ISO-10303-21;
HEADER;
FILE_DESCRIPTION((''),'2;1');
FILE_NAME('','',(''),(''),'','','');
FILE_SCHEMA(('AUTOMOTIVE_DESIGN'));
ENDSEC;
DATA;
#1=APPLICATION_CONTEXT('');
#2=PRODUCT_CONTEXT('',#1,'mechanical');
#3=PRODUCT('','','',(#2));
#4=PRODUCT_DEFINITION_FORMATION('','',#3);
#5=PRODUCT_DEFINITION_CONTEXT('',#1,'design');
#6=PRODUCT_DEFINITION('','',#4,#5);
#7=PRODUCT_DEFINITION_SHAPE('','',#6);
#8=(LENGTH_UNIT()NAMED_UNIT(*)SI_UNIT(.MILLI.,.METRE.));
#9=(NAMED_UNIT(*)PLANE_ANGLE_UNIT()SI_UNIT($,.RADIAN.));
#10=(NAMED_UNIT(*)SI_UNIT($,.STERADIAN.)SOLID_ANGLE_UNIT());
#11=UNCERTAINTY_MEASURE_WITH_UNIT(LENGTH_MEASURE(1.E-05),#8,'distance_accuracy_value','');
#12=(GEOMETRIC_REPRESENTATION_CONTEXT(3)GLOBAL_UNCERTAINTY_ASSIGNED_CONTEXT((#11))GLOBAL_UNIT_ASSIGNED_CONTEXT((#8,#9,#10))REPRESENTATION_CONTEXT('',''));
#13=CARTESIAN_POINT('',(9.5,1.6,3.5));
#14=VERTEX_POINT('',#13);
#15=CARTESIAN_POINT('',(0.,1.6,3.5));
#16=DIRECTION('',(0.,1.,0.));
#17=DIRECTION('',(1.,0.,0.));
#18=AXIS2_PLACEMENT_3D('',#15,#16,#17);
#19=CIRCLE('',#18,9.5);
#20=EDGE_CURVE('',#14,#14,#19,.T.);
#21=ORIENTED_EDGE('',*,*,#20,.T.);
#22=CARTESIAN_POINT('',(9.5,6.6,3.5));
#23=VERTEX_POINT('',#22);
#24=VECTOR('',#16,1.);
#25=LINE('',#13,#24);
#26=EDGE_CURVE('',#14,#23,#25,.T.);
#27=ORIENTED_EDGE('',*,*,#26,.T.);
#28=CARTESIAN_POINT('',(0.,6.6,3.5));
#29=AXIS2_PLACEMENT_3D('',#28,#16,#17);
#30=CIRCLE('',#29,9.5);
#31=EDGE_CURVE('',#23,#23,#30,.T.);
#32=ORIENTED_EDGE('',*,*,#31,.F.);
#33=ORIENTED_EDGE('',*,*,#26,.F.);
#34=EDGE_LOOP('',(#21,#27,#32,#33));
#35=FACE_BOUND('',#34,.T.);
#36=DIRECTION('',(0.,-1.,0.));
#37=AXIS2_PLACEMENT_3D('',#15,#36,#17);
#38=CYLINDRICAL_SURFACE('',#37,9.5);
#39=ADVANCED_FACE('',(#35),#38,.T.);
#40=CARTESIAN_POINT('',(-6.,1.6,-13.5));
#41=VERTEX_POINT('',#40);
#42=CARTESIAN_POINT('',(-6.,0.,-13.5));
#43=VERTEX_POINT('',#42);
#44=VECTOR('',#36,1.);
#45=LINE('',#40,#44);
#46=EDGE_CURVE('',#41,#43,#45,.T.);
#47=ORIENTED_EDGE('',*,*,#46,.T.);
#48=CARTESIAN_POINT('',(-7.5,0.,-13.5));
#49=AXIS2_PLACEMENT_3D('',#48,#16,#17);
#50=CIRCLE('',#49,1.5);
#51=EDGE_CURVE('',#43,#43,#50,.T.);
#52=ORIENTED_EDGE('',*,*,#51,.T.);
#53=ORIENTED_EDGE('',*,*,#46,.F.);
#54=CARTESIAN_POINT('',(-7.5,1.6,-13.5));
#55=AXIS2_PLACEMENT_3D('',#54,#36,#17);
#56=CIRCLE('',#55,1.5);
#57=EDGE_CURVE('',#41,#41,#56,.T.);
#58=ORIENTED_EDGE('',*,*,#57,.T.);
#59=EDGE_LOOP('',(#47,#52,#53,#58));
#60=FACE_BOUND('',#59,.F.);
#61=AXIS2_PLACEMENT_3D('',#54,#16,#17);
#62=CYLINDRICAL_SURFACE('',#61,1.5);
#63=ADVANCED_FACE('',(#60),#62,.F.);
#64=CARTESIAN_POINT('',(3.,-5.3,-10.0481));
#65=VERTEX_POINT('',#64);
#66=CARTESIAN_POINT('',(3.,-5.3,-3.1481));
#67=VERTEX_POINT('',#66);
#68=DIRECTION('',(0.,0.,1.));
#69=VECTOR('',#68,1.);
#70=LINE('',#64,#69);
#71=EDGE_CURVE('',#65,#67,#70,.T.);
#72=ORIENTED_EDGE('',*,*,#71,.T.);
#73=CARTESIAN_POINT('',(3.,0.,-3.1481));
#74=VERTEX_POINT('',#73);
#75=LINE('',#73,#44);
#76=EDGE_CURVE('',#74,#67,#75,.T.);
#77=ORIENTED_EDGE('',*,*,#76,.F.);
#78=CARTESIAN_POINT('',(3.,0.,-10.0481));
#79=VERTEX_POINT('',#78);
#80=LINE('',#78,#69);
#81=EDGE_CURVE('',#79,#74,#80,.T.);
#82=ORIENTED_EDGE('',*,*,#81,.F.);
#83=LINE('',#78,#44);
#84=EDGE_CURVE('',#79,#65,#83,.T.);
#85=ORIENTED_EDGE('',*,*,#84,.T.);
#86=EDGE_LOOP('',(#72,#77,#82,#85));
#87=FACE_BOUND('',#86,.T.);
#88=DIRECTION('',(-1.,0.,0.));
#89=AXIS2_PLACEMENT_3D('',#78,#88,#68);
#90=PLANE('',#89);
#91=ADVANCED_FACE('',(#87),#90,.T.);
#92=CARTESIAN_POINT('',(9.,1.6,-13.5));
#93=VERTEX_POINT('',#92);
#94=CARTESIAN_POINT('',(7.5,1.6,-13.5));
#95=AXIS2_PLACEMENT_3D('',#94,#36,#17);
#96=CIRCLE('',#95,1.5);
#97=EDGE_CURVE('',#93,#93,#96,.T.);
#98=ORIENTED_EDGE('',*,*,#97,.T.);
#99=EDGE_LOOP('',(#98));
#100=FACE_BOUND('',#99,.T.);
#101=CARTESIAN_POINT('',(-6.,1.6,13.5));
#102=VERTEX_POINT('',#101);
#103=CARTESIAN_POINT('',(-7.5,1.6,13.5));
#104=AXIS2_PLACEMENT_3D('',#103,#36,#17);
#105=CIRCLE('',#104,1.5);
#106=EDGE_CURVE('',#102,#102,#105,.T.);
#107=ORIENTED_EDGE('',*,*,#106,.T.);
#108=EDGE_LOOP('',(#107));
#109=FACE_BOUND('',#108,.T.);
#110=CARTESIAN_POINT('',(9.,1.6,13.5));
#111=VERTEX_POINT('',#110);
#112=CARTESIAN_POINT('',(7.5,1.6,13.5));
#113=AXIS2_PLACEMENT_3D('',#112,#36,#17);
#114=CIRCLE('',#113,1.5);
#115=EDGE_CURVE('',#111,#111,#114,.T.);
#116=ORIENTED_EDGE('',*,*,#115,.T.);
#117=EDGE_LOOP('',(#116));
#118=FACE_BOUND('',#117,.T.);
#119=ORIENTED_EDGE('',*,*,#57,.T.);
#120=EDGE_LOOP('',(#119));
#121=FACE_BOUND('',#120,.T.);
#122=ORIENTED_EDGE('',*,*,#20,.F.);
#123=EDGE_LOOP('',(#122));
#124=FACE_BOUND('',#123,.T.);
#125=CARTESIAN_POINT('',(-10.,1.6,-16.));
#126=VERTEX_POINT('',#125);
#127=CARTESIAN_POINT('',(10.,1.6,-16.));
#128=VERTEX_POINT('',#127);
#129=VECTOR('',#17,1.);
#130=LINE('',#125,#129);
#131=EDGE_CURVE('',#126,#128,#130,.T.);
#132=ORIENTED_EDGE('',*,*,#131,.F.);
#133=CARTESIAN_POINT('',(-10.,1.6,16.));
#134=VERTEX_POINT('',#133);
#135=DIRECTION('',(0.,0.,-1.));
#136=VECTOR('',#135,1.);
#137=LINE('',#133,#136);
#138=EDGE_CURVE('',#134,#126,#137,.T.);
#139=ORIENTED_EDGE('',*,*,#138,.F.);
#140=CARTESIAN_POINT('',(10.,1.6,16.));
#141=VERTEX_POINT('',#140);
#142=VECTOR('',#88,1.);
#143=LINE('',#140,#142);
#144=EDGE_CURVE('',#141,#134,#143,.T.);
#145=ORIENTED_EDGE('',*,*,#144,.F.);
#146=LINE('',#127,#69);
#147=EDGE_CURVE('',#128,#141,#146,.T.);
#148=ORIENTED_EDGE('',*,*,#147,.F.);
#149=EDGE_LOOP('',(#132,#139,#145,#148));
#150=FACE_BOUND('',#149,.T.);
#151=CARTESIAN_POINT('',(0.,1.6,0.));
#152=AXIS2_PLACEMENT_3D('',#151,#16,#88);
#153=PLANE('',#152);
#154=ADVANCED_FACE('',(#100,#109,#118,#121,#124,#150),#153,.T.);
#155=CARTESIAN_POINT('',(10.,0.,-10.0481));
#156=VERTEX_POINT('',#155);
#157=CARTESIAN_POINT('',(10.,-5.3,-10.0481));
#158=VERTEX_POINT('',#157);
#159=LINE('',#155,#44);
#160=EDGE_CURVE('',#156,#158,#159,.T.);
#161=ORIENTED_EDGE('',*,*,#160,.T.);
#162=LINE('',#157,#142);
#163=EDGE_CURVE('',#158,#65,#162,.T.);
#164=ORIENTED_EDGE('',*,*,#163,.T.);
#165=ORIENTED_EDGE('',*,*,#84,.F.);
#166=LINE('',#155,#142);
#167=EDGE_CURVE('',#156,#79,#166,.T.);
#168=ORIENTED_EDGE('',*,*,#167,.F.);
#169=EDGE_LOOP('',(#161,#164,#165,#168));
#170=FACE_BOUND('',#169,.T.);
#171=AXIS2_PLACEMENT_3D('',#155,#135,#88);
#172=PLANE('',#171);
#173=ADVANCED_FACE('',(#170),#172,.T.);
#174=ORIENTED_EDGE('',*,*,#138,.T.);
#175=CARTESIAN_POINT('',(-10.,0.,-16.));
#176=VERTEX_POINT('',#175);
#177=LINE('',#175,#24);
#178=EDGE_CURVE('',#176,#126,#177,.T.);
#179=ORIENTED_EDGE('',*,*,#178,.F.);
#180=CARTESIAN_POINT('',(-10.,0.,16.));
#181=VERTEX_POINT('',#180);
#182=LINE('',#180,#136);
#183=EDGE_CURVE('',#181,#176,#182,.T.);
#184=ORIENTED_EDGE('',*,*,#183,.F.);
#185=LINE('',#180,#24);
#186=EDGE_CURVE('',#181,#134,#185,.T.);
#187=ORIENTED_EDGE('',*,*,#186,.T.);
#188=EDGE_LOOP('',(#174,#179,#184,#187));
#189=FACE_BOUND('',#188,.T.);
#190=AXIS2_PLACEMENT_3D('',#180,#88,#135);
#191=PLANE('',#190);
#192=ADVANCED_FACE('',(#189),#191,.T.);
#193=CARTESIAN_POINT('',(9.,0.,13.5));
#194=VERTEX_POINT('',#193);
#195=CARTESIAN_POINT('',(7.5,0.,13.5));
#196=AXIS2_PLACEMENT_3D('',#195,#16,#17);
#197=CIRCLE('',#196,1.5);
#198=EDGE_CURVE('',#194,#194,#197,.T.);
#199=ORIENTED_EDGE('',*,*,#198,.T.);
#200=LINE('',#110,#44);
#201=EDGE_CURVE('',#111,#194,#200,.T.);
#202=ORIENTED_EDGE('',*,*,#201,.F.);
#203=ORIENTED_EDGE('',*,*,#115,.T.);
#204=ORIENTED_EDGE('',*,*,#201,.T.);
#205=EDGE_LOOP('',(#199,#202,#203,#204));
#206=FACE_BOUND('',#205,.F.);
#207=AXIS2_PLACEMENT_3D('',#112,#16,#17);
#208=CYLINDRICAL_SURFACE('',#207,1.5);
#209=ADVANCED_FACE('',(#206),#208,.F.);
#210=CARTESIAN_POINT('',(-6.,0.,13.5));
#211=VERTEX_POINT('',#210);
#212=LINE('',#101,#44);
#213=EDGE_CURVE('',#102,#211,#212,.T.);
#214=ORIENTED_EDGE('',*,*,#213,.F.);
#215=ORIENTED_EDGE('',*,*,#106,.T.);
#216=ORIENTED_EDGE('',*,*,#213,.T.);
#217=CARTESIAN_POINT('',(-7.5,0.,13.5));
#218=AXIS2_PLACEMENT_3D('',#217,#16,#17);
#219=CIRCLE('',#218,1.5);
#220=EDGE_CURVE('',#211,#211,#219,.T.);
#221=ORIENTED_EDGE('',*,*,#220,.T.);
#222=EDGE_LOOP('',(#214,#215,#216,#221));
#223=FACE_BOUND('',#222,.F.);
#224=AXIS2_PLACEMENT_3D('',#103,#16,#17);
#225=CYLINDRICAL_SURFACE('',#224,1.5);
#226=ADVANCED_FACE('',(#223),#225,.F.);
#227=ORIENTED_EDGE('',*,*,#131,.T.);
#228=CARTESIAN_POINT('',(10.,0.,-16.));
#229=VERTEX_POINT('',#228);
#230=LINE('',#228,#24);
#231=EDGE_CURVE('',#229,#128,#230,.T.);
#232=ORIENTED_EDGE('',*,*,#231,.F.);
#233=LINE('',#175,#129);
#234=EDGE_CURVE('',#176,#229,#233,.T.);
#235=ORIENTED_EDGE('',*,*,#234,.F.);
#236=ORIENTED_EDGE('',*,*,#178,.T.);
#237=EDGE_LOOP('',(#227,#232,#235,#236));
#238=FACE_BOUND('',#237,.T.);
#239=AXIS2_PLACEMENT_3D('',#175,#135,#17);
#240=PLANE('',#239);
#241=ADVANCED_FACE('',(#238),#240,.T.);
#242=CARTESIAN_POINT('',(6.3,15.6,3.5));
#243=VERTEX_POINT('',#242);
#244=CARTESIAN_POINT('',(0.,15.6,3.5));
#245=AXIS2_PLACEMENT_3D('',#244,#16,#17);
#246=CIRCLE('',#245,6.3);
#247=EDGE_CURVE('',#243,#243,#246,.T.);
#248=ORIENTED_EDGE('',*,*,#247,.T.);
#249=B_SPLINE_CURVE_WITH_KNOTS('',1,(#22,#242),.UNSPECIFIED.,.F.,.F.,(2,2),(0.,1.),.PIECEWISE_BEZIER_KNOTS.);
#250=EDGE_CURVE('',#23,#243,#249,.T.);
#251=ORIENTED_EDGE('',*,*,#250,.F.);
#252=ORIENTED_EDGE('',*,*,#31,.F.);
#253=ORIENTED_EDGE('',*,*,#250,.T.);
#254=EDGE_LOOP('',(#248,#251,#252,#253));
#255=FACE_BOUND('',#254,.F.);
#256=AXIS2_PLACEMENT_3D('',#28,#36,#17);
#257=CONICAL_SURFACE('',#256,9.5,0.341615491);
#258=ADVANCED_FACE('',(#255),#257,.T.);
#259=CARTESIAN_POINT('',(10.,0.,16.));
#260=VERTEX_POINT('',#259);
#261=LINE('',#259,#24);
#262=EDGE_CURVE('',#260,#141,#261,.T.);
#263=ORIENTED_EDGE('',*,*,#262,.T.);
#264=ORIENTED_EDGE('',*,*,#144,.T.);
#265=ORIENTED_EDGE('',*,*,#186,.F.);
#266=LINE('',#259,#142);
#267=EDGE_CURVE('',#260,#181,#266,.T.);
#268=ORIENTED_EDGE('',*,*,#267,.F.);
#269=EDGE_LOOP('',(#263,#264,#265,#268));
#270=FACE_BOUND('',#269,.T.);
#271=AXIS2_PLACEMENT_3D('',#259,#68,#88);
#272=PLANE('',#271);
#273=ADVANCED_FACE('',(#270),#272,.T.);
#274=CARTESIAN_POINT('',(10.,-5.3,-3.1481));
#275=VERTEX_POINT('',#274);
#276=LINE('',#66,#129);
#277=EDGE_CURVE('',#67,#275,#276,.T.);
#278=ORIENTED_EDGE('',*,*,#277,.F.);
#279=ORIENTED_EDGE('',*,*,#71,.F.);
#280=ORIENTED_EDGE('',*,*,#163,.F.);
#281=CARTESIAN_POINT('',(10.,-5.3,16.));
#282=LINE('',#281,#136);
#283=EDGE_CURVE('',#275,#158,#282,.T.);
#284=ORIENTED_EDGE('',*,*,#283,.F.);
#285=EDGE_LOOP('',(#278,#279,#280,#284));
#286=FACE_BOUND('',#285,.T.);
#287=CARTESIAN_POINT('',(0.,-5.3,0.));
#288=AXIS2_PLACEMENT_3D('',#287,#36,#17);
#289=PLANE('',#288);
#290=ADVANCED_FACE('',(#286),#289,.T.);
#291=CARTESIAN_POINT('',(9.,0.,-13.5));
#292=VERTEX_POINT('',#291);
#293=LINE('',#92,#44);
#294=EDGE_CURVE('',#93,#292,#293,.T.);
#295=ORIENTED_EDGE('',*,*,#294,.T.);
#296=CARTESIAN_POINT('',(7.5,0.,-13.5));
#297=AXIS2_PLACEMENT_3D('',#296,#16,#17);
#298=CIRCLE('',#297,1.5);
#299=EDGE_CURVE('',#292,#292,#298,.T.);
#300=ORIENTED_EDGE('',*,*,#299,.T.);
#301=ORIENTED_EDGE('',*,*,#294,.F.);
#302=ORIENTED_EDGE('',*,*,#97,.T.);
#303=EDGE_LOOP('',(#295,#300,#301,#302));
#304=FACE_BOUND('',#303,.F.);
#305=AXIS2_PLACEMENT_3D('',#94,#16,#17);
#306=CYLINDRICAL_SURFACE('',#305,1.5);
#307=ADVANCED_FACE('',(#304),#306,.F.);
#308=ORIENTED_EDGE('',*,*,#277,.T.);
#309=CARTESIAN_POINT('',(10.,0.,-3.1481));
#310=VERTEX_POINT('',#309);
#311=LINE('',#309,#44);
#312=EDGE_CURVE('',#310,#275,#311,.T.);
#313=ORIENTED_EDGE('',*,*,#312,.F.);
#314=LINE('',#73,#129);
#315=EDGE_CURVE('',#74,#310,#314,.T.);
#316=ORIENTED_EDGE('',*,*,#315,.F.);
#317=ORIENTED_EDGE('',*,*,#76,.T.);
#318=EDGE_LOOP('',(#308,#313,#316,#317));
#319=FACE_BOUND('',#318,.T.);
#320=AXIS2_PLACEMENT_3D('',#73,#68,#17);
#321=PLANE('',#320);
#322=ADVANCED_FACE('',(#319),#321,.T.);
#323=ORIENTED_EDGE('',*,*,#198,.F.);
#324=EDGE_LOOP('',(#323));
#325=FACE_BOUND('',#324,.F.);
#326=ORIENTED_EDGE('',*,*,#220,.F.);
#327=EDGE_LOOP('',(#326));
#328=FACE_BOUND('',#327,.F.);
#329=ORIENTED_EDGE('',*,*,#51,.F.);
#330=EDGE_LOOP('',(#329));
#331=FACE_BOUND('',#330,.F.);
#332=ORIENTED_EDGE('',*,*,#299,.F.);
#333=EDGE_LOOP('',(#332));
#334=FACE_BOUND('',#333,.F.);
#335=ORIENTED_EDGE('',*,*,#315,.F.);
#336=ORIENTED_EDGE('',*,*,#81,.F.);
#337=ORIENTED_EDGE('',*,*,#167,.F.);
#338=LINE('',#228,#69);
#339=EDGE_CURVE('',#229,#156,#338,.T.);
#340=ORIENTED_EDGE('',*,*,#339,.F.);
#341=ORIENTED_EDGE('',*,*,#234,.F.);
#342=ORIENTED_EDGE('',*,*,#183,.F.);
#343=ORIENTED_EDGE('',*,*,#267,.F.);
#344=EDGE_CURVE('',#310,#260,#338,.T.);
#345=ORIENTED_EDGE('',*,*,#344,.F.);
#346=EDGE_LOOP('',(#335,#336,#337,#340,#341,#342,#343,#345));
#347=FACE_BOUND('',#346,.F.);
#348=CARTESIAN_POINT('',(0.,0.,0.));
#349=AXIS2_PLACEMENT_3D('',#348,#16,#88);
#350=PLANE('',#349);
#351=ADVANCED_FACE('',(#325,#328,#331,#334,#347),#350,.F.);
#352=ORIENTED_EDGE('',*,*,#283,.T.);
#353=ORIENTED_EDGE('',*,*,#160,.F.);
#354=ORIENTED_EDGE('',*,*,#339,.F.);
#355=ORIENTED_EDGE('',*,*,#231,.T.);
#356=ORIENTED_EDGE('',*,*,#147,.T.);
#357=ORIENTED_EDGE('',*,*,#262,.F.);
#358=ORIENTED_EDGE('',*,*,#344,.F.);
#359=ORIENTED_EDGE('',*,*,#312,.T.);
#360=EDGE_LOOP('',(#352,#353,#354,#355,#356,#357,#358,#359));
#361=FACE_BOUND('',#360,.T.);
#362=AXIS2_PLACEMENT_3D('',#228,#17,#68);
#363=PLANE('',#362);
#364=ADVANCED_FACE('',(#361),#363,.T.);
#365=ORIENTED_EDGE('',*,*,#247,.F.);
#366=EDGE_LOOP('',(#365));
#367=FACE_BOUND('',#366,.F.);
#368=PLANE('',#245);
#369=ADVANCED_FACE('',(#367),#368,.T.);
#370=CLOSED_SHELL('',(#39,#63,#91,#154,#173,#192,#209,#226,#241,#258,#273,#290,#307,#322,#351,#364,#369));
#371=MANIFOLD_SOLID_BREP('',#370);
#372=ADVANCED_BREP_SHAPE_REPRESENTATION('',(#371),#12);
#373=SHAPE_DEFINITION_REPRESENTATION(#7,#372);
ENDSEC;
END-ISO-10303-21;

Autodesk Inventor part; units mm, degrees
ref_plane "YZ Plane" through (0, 0, 0) normal (1, 0, 0) x (0, 1, 0)
ref_plane "XZ Plane" through (0, 0, 0) normal (0, 1, 0) x (-1, 0, 0)
sketch "Sketch1" plane through (0, 0, 0) normal (0, 1, 0) x (-1, 0, 0)
  line L0 (-10, 16) -> (10, 16)
  line L1 (10, 16) -> (10, -16)
  line L2 (10, -16) -> (-10, -16)
  line L3 (-10, -16) -> (-10, 16)
  line L4 (-10, 16) -> (10, -16) construction
  line L5 (10, 16) -> (-10, -16) construction
  point P0 (0, 0)
  dimension "d0" = 20
  dimension "d1" = 32
extrude "Extrusion1" add sketch "Sketch1" along normal blind 1.6
sketch "Sketch3" plane through (0, 1.6, 0) normal (0, 1, 0) x (1, 0, 0)
  line L0 (-10, 16) -> (-10, -16) projected
  line L1 (-10, -16) -> (-7.5, -16)
  line L2 (-10, -16) -> (10, -16) projected
  line L3 (-7.5, -16) -> (-7.5, -13.5)
  circle A0 centre (-7.5, -13.5) radius 1.5
  point P0 (0, 0)
  dimension "d4" = 2.5
  dimension "d5" = 2.5
  dimension "d6" = 3
extrude "Extrusion2" cut sketch "Sketch3" against normal blind 1.6
pattern_linear "Rectangular Pattern1" count 2 spacing 27 along (0, 0, -1) count 2 spacing 15 along (1, 0, 0) of "Extrusion2"
sketch "Sketch4" plane through (0, 1.6, 0) normal (0, 1, 0) x (1, 0, 0)
  line L0 (-10, -16) -> (10, -16) projected
  line L1 (10, 16) -> (-10, 16) projected
  circle A0 centre (0, -3.5) radius 9.5
  point P0 (0, 0)
extrude "Extrusion3" add sketch "Sketch4" along normal blind 5
ref_plane "Work Plane1" through (0, 15.6, 3.5) normal (0, 1, 0) x (1, 0, 0)
sketch "Sketch5" plane through (0, 15.6, 3.5) normal (0, 1, 0) x (1, 0, 0)
  circle A0 centre (0, 0) radius 6.3
  point P0 (0, 3.5)
  dimension "d22" = 12.6
sketch "Sketch6" plane through (0, 6.6, 3.5) normal (0, 1, 0) x (1, 0, 0)
  circle A0 centre (0, 0) radius 9.5
  point P0 (0, 3.5)
loft "Loft1" add profiles "Sketch5" section 1 edges at (-9.5, 6.6, 3.5)
sketch "Sketch7" plane through (0, 0, 0) normal (0, -1, 0) x (1, 0, 0)
  line L0 (9.9296, -16.0477) -> (10, -10.0481)
  line L1 (10, 16) -> (10, -16) projected
  line L2 (10, -10.0481) -> (3, -10.0481)
  line L3 (3, -10.0481) -> (3, -3.1481)
  line L4 (3, -3.1481) -> (10, -3.1481)
  line L5 (10, -3.1481) -> (10, -10.0481)
  point P0 (0, 0)
  dimension "d27" = 6
  dimension "d28" = 7
  dimension "d29" = 6.9
extrude "Extrusion4" add sketch "Sketch7" along normal blind 5.3
properties part number "SensorGas"
